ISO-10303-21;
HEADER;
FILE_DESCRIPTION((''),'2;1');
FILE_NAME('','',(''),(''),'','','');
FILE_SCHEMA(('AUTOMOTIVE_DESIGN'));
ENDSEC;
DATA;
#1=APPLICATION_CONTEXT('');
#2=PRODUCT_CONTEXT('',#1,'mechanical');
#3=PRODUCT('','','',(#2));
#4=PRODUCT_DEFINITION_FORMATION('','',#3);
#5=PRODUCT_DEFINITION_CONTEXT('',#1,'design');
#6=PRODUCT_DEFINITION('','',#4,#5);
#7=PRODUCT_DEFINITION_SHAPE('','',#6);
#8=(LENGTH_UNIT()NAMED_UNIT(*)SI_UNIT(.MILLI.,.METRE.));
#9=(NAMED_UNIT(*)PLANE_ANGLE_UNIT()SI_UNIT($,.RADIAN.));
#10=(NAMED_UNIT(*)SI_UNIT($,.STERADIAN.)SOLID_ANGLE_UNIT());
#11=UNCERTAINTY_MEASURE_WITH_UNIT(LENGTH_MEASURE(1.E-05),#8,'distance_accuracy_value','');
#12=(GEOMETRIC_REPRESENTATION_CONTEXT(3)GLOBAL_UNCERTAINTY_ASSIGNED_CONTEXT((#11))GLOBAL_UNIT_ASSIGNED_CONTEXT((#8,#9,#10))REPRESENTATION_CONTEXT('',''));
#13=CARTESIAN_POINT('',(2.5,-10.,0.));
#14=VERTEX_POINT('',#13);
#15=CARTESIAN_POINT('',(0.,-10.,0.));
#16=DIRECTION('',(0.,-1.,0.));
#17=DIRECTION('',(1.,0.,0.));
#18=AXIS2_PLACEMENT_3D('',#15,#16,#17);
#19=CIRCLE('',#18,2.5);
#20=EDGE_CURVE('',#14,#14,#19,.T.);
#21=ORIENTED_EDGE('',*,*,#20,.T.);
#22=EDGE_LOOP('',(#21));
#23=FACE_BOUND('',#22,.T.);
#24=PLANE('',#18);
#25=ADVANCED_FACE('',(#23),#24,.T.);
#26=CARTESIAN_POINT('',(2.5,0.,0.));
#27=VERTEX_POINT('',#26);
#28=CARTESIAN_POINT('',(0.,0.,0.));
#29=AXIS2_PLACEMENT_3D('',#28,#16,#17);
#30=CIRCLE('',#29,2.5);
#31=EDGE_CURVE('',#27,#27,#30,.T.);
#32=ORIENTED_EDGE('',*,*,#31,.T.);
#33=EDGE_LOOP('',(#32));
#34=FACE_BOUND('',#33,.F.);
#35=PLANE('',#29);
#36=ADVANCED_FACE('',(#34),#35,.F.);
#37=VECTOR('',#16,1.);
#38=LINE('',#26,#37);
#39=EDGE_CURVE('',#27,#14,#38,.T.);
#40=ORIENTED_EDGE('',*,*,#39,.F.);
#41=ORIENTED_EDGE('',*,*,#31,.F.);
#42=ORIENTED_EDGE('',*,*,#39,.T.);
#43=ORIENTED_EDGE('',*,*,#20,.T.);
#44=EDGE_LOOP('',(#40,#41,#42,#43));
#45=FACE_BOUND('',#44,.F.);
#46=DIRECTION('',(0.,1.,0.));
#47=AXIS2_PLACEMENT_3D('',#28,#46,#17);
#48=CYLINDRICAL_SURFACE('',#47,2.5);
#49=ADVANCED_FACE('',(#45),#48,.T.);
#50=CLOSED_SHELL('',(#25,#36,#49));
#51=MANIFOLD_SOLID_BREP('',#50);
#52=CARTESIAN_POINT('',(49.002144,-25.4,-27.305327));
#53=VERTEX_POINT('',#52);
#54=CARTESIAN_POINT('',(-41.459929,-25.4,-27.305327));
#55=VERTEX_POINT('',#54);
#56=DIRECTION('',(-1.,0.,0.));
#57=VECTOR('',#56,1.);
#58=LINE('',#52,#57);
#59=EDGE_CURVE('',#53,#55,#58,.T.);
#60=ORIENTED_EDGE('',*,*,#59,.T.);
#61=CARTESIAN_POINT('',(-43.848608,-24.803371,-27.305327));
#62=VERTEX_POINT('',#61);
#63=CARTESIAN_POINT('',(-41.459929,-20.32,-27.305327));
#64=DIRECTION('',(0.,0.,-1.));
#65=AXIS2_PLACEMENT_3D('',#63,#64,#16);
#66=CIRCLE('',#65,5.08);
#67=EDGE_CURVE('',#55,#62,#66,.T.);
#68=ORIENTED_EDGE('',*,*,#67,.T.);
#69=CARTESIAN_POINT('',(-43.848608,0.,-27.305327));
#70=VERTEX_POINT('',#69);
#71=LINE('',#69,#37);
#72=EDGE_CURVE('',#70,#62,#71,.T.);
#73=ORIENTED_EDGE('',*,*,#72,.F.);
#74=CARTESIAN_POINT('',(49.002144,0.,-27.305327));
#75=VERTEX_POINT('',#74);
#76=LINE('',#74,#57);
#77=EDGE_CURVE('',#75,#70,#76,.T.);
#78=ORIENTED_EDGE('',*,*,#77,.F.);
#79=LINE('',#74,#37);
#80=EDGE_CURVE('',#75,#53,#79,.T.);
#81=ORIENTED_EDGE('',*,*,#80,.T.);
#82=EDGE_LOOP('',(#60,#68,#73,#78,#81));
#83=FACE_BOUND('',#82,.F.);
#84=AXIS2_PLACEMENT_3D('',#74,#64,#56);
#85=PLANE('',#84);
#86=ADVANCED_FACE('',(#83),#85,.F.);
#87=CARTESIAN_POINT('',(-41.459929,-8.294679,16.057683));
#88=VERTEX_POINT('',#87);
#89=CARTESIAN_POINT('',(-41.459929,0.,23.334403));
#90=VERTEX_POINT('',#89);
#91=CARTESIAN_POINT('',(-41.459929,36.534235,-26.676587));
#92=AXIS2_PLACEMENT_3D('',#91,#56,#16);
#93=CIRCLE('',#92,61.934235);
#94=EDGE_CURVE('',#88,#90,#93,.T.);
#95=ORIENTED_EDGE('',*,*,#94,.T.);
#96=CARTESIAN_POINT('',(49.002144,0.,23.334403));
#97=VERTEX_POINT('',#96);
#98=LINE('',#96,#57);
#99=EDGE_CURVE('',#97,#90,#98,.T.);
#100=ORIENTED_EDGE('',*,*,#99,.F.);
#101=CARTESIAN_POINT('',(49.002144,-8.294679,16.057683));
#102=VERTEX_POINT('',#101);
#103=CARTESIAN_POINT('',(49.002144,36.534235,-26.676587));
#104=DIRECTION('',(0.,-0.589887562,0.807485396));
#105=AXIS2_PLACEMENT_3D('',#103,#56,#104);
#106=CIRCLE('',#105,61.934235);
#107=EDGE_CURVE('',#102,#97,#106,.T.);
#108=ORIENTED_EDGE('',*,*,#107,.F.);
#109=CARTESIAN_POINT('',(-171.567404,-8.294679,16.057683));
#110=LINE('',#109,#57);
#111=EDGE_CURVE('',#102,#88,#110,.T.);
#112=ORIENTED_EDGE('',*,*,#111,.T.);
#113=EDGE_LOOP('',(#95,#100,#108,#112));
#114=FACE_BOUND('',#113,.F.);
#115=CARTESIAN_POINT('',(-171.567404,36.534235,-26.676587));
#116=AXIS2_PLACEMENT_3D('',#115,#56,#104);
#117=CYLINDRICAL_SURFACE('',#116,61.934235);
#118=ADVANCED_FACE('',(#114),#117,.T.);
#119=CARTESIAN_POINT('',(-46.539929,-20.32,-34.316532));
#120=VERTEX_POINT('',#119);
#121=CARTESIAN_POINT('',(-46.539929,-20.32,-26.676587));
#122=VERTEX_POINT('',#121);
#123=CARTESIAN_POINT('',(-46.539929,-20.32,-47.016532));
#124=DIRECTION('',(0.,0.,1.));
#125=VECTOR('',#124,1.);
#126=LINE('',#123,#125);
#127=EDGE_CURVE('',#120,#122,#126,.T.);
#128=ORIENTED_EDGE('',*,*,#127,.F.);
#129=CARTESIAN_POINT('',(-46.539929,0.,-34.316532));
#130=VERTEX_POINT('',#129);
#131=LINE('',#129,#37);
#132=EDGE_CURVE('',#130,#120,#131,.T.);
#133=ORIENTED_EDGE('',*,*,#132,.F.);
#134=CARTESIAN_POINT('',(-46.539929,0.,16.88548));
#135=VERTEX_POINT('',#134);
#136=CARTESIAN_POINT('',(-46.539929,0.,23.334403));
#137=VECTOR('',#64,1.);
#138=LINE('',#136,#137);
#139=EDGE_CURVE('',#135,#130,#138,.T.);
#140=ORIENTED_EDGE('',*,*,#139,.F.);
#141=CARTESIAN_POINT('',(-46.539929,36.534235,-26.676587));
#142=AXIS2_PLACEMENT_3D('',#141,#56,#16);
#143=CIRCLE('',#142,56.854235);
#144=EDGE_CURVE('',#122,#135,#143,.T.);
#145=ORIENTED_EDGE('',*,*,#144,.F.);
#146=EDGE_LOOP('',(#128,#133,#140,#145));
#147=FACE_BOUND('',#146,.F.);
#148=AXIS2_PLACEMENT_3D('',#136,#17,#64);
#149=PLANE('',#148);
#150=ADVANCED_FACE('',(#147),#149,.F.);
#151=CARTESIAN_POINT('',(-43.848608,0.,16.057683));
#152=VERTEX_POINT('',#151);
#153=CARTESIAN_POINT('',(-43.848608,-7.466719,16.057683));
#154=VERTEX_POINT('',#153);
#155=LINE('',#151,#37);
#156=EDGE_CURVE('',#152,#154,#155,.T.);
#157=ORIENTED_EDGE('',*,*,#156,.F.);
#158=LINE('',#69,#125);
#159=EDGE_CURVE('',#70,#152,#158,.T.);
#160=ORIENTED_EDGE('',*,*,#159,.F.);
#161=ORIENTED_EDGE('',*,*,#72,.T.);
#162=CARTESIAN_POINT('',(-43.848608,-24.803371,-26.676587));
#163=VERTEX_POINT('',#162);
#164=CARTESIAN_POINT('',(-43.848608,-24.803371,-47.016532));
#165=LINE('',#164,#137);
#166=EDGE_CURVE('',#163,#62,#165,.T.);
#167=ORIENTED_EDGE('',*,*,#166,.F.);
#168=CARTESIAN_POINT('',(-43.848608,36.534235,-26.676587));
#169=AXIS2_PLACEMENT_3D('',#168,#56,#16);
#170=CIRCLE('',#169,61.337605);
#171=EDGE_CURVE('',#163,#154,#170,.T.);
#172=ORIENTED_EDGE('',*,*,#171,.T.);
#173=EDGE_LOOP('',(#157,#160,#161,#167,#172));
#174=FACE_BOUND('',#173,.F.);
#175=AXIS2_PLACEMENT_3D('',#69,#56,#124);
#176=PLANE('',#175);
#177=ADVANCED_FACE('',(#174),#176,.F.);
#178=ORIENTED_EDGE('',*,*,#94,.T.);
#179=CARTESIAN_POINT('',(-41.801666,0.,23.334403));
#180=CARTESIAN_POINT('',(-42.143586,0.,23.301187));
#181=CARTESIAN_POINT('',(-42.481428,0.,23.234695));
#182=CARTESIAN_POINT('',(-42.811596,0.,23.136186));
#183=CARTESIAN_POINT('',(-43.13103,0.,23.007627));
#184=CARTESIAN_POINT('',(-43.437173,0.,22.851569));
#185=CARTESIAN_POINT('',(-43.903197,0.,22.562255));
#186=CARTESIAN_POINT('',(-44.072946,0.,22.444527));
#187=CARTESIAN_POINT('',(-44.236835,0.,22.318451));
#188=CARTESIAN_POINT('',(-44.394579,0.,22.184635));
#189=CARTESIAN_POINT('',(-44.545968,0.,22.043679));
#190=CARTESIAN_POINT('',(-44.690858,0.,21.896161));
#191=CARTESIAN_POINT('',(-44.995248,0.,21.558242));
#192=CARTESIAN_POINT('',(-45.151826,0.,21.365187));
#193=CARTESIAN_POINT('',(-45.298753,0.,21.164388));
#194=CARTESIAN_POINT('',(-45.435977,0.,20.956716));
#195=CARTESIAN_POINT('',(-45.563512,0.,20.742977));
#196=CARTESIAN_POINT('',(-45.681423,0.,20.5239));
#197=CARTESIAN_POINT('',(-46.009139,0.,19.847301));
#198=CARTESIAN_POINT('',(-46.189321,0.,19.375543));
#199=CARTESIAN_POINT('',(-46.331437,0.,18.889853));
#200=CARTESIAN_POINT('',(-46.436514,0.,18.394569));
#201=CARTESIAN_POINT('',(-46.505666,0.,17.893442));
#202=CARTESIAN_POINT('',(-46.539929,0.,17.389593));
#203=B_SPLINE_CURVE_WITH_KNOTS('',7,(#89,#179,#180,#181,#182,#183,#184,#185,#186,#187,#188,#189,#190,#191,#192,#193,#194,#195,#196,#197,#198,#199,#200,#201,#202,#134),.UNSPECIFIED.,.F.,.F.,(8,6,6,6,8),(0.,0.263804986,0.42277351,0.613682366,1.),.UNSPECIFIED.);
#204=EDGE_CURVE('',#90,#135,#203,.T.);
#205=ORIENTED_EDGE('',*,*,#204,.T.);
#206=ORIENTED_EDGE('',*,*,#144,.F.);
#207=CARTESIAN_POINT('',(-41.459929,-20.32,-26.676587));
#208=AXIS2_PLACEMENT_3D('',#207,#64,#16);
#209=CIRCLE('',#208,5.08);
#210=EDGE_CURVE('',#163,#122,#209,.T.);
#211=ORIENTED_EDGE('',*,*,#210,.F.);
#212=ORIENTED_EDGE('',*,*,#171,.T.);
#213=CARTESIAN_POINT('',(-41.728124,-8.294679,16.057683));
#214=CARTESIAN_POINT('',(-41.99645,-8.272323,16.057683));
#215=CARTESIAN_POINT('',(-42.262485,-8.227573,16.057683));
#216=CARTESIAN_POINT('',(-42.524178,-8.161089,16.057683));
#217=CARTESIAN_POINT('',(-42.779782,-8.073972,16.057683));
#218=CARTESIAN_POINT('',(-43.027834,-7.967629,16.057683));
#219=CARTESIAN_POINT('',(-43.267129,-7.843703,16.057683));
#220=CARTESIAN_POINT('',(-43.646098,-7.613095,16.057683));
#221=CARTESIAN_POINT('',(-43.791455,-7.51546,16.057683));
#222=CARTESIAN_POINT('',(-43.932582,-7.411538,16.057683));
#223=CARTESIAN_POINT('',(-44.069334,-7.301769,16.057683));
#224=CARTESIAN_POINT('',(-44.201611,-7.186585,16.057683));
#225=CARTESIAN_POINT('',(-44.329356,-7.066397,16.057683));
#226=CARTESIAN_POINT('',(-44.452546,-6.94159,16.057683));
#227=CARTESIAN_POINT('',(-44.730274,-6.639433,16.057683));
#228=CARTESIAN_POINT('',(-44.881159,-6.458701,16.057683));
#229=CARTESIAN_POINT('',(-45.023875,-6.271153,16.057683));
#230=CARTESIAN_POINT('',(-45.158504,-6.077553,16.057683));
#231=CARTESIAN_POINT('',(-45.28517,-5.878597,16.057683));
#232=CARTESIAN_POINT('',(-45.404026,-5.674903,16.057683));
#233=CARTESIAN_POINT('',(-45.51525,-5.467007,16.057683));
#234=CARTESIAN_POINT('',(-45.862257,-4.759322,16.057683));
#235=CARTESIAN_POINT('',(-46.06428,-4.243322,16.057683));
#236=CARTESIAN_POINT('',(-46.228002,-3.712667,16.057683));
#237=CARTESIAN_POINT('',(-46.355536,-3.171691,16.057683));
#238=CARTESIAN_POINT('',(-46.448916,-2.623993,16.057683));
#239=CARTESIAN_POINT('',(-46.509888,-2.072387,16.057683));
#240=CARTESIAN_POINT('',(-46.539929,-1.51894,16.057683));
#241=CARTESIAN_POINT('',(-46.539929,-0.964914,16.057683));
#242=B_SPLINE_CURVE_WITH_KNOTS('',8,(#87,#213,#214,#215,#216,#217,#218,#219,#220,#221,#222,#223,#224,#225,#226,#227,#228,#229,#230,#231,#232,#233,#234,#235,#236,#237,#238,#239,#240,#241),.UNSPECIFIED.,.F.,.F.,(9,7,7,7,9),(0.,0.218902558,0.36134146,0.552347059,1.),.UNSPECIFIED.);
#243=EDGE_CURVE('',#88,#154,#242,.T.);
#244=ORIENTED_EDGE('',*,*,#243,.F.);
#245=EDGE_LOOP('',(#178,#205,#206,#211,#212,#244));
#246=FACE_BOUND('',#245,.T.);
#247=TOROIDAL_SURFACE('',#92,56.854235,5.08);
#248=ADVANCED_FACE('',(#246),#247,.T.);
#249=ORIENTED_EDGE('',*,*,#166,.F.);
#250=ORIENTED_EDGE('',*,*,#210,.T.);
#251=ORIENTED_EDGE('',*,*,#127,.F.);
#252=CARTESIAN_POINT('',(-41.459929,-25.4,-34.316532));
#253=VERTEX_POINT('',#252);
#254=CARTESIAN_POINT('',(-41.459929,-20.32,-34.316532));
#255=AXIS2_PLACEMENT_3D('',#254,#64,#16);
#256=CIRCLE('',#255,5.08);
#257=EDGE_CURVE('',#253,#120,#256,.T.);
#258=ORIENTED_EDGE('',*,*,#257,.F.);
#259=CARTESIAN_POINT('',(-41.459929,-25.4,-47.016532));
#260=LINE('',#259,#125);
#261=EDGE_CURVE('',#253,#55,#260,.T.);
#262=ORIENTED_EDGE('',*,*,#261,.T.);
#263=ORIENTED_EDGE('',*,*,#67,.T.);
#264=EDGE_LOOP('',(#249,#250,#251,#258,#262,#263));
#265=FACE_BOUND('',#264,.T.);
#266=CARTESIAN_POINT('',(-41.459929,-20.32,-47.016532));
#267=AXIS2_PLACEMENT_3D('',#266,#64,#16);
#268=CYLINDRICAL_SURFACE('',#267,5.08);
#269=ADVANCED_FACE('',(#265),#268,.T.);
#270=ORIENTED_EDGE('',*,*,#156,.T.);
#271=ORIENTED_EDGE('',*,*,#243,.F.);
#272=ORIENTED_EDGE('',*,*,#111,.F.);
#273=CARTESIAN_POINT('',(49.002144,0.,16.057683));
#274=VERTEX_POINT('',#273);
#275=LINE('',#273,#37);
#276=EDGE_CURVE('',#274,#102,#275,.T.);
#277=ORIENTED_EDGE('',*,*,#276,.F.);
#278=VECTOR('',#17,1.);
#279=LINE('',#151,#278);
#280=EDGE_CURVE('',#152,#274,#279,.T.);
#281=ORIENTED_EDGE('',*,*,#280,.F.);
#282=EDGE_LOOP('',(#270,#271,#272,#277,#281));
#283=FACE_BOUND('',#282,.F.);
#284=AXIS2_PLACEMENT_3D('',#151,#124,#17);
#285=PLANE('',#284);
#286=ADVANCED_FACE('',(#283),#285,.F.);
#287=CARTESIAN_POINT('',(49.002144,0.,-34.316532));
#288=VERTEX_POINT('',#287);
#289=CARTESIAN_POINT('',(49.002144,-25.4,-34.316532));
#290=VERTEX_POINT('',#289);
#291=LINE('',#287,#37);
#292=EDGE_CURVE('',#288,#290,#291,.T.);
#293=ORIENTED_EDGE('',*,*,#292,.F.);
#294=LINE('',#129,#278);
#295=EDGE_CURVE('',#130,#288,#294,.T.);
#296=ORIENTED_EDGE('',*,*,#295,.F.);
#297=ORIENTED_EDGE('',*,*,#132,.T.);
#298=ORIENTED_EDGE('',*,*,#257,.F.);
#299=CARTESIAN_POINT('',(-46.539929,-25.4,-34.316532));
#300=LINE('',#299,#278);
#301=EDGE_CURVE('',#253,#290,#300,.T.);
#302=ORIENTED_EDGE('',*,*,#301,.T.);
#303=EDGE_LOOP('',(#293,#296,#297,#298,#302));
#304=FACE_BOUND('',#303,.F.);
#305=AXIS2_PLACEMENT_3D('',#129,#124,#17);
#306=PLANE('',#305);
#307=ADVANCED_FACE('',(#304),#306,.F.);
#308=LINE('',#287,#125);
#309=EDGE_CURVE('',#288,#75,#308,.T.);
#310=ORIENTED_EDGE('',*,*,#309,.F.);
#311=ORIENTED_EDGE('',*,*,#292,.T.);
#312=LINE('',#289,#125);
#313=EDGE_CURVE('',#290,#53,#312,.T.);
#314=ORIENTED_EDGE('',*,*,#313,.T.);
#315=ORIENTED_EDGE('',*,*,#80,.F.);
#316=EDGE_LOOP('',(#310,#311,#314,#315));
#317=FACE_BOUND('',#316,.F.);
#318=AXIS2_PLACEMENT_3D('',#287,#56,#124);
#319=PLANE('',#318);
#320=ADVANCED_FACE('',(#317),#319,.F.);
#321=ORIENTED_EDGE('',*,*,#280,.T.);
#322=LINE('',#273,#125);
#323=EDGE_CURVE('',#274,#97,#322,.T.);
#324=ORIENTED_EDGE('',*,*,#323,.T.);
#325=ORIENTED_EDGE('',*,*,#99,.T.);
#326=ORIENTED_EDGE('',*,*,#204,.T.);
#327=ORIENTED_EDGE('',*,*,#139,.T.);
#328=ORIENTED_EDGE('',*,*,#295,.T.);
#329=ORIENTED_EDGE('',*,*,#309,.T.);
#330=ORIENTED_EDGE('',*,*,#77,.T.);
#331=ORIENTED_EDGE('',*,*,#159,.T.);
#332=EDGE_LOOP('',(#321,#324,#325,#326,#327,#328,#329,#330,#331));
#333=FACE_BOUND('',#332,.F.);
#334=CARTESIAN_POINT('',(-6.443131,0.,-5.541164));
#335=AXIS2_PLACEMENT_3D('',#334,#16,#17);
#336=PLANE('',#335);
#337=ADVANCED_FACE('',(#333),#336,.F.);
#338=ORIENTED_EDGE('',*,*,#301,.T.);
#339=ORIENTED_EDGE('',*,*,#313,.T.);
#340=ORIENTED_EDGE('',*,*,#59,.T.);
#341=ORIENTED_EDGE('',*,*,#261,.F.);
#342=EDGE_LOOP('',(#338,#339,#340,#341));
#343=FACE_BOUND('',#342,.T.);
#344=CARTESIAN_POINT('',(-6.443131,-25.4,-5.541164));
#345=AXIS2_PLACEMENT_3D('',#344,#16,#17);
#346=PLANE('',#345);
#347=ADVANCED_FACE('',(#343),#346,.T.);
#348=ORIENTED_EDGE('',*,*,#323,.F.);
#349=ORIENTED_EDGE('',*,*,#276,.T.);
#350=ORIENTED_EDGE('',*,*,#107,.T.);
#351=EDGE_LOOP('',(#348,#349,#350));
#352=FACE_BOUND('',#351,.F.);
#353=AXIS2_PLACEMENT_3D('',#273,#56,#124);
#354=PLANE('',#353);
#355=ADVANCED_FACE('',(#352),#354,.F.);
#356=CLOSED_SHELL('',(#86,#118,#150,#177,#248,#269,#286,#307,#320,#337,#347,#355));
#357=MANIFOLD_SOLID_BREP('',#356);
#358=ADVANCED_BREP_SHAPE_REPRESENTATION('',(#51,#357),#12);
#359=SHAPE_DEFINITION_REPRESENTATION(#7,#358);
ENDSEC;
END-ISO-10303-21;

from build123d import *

# Parameters (mm, degrees)
F0_R        = 2.5
F1_DEPTH    = 10
F3_DEPTH    = 25.4
F4_T1_DEPTH = 345.5970234227
F5_T1_DEPTH = 20.3399448702
F5_T4_ANGLE = 65.6015156343


# Not quite as in the source:
# - a fillet or chamfer that OpenCascade refuses, or shapes differently, is made with other operations: its cross-section is extruded or revolved along the edge and cut away or added


with BuildPart() as f1:
    # F0 (on Front) → F1 (new body)
    with BuildSketch(Plane.XZ):
        Circle(F0_R)
    extrude(amount=F1_DEPTH)


with BuildPart() as f3:
    # F2 (on Front) → F3 (new body)
    with BuildSketch(Plane.XZ):
        Polygon((-43.8486076891, -27.3053273559), (-43.8486076891, 16.0576831549), (49.0021444857, 16.0576831549), (49.0021444857, 23.334402591), (-46.5399287641, 23.334402591), (-46.5399287641, -34.3165323138), (49.0021444857, -34.3165323138), (49.0021444857, -27.3053273559), align=None)
    extrude(amount=F3_DEPTH)

    # F4: fillet of radius 61.9342347291 on 1 edges, made by hand

    # F4_s2 → F4_t1 (cut)
    with BuildSketch(Plane.YZ.offset(-171.5674038506)):
        with BuildLine():
            ThreePointArc((0, 23.334402591), (-18.6860935062, 1.369174822), (-25.4, -26.6765874436))
            Line((-25.4, -26.6765874436), (-25.4, 23.334402591))
            Line((-25.4, 23.334402591), (0, 23.334402591))
        make_face()
    extrude(amount=F4_T1_DEPTH, mode=Mode.SUBTRACT)

    # F5: fillet of radius 5.08 on 2 edges, made by hand

    # F5_s2 → F5_t1 (cut)
    with BuildSketch(Plane.XY.offset(-47.0165323138)):
        with BuildLine():
            ThreePointArc((-41.4599287641, -25.4), (-45.0520312125, -23.9121024484), (-46.5399287641, -20.32))
            Line((-46.5399287641, -20.32), (-46.5399287641, -25.4))
            Line((-46.5399287641, -25.4), (-41.4599287641, -25.4))
        make_face()
    extrude(amount=F5_T1_DEPTH, mode=Mode.SUBTRACT)

    # F5_s3 → F5_t4 (revolve, cut)
    with BuildSketch(Plane.XY.offset(-26.6765874438)):
        with BuildLine():
            ThreePointArc((-41.4599287641, -25.4), (-45.0520312125, -23.9121024484), (-46.5399287641, -20.32))
            Line((-46.5399287641, -20.32), (-46.5399287641, -25.4))
            Line((-46.5399287641, -25.4), (-41.4599287641, -25.4))
        make_face()
    revolve(axis=Axis((-46.5399287641, 36.5342347296, -26.6765874438), (-1, 0, 0)), revolution_arc=F5_T4_ANGLE, mode=Mode.SUBTRACT)


solid = Compound([f1.part, f3.part])
